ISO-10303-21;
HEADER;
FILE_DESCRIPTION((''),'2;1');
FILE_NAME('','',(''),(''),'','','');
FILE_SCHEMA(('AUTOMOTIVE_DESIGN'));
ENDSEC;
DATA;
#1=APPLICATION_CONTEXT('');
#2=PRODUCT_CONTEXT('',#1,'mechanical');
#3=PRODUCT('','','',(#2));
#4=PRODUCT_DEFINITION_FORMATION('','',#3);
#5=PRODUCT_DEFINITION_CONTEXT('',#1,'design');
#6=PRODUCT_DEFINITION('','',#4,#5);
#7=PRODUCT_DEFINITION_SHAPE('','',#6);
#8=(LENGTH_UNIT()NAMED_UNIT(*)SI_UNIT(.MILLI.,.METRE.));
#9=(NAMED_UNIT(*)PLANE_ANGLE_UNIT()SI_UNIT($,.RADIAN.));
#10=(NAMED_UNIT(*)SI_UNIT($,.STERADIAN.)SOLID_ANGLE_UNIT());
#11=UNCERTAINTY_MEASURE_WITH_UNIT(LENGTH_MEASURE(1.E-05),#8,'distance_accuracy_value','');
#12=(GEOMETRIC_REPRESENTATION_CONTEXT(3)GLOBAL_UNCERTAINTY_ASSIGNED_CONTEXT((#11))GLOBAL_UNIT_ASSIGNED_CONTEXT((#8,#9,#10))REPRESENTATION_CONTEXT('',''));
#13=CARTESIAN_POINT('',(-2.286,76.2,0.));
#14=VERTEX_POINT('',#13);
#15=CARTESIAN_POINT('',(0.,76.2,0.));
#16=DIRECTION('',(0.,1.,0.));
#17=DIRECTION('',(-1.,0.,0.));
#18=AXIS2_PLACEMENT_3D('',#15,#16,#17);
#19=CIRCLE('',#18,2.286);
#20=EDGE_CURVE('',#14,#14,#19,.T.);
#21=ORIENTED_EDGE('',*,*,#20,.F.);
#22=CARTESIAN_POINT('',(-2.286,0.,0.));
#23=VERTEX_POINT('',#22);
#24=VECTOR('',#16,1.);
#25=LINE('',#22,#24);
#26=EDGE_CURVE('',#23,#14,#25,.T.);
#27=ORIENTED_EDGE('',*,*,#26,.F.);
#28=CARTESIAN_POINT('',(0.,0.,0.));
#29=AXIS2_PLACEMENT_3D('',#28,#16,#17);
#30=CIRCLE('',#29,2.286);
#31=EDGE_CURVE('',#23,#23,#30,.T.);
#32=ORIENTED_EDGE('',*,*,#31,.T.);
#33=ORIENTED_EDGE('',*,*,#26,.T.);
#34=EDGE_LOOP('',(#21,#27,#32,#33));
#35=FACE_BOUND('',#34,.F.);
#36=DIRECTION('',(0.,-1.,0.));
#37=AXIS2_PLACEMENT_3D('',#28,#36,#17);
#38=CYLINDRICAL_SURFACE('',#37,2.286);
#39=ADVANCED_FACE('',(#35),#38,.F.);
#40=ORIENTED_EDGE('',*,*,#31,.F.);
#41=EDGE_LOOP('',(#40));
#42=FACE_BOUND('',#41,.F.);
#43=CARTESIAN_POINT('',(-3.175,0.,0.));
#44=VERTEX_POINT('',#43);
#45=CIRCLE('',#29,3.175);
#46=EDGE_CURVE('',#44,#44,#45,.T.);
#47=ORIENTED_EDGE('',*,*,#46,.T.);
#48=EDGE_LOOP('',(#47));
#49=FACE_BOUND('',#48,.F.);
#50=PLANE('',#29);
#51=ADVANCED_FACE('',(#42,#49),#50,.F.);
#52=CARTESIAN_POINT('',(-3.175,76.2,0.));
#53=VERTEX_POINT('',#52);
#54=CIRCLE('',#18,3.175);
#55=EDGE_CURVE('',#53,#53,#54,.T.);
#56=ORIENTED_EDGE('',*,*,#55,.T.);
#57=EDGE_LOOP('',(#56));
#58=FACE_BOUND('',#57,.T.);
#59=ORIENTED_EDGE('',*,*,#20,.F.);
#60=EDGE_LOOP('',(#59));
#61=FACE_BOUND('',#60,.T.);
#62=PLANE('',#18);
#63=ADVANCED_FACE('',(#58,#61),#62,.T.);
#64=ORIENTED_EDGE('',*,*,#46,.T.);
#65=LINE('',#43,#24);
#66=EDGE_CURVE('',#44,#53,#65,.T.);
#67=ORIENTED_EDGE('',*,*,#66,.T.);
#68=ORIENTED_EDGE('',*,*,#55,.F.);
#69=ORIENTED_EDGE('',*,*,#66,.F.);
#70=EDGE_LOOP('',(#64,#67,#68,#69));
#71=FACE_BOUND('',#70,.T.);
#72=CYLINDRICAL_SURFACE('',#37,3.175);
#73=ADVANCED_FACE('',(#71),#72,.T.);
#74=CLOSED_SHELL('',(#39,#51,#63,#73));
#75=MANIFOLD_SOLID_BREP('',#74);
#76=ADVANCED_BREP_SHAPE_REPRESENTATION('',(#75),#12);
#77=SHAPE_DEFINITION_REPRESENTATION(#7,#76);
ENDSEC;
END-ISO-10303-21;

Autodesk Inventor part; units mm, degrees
ref_plane "YZ Plane" through (0, 0, 0) normal (1, 0, 0) x (0, 1, 0)
ref_plane "XZ Plane" through (0, 0, 0) normal (0, 1, 0) x (-1, 0, 0)
ref_plane "XY Plane" through (0, 0, 0) normal (0, 0, 1) x (1, 0, 0)
sketch "Sketch1" plane through (0, 0, 0) normal (0, 1, 0) x (-1, 0, 0)
  circle A0 centre (0, 0) radius 3.175
  circle A1 centre (0, 0) radius 2.286
  dimension "d0" = 6.35
  dimension "d1" = 4.572
extrude "Extrusion1" add sketch "Sketch1" along normal blind 76.2
thread "Thread1" size "1/4-20 UNC" class "2A" standard "ANSI Unified Screw Threads" length 6.35
thread "Thread2" size "1/4-20 UNC" class "2A" standard "ANSI Unified Screw Threads" length 6.35
properties part number "Shaft - Flywheel" material "Steel, Alloy"
